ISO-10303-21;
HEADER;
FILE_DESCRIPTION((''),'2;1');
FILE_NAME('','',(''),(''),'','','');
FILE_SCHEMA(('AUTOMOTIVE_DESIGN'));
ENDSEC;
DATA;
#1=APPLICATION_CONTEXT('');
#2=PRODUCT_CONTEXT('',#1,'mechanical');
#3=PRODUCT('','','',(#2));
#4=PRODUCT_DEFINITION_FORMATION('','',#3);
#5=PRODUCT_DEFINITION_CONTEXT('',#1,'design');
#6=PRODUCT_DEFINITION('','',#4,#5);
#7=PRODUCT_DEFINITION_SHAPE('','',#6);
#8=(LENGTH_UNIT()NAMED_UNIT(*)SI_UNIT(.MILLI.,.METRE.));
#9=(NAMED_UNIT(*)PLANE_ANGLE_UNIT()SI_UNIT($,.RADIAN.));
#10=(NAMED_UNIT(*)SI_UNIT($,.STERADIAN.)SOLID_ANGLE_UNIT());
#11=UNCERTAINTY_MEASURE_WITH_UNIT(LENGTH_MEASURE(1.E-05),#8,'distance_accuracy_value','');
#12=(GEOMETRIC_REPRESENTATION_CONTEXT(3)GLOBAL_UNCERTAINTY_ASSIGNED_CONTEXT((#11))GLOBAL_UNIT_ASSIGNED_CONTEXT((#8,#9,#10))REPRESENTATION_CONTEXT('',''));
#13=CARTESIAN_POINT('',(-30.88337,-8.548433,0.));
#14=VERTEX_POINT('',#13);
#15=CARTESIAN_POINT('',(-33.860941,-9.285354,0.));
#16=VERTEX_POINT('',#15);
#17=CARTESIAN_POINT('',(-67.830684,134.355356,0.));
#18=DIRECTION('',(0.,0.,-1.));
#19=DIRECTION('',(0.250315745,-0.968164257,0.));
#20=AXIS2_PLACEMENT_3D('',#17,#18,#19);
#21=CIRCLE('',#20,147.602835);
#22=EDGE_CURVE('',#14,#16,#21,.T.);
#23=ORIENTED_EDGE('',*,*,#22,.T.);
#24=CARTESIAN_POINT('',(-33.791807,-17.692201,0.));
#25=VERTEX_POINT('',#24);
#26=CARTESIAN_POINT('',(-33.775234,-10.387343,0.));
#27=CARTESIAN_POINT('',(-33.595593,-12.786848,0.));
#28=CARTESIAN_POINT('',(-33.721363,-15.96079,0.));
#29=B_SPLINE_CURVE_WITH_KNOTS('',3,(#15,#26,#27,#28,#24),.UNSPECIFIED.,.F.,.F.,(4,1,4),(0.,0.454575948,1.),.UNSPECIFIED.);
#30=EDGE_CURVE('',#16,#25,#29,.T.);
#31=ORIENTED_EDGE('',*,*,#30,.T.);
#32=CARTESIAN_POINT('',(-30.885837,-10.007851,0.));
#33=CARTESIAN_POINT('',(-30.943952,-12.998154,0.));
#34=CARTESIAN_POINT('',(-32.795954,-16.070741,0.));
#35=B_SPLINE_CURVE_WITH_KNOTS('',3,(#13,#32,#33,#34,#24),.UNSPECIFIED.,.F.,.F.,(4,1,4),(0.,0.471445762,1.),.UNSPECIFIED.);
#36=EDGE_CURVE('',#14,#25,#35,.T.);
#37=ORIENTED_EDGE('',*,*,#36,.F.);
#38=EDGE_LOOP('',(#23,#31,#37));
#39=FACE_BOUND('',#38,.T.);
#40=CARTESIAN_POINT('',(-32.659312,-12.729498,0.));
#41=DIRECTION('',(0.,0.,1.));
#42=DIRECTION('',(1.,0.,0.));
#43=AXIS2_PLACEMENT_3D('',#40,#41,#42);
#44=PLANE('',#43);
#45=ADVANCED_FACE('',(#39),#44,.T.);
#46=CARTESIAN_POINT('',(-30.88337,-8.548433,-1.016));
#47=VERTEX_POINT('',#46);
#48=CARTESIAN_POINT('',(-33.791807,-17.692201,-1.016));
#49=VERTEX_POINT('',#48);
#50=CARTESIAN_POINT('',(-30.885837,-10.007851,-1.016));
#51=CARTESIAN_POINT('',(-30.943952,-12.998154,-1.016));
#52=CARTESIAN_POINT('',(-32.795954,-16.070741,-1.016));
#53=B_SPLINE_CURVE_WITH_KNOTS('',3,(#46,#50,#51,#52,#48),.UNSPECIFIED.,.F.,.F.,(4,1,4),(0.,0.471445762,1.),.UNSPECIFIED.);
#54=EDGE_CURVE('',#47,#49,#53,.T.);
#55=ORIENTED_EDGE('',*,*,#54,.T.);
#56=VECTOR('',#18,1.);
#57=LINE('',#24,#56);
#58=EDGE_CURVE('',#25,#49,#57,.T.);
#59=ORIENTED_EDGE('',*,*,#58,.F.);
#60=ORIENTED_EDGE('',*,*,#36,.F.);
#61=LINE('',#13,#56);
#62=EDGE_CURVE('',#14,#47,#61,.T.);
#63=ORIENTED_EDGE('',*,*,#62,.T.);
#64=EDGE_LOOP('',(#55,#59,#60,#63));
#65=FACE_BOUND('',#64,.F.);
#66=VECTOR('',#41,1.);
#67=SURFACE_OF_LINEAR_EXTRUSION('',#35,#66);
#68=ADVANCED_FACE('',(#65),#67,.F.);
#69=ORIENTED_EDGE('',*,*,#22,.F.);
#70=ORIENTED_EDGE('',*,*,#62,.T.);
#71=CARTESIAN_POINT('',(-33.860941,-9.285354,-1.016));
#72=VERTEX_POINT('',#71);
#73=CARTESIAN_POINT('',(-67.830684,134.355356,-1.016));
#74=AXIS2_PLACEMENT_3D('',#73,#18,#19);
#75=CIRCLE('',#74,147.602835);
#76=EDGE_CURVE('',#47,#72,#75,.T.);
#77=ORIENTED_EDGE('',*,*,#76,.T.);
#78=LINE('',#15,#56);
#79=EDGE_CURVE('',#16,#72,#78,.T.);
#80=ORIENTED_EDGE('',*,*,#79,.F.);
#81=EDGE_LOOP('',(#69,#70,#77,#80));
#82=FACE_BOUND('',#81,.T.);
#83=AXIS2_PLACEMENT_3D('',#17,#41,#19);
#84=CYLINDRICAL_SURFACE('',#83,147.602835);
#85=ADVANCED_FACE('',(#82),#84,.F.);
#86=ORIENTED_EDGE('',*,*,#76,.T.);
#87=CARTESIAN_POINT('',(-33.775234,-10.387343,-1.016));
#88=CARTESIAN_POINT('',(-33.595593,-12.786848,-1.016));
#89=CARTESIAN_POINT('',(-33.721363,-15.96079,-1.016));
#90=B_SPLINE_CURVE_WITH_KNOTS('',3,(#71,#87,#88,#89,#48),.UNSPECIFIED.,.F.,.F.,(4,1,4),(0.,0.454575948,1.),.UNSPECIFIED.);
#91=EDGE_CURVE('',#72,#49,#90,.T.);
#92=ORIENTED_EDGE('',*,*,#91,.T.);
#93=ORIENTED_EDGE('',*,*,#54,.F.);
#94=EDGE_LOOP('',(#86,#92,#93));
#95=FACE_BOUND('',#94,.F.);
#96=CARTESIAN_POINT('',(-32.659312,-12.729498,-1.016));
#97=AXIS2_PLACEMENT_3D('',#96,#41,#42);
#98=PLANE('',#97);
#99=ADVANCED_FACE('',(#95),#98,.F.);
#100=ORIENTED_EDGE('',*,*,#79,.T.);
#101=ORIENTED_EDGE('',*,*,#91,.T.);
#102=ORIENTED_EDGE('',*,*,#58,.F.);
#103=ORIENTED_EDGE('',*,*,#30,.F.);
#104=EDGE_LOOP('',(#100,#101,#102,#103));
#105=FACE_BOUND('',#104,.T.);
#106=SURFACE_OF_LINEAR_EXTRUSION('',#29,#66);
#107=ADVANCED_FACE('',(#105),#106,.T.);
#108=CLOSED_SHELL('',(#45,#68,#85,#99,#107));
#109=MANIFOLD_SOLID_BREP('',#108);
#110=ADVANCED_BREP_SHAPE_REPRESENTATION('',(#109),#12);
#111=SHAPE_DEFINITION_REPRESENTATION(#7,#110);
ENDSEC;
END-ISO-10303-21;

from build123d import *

# Parameters (mm, degrees)
F0_R     = 0.65
F3_DEPTH = 0.9398
F5_DEPTH = 1.016


# Not quite as in the source:
# - a fillet or chamfer that OpenCascade refuses, or shapes differently, is made with other operations: its cross-section is extruded or revolved along the edge and cut away or added
# - a feature names something its author has since deleted; it is built from what else it names


with BuildPart() as f3:
    # F0 (on Top) → F3 (new body)
    with BuildSketch(Plane.XY):
        with Locations((-65.8378056469, 32.2275372886)):
            Circle(F0_R)
    extrude(amount=F3_DEPTH)

    # F4: fillet of radius 0.6 on 1 edges, made by hand

    # F4_s1 → F4_t2 (revolve, cut)
    with BuildSketch(Plane.XZ.offset(-32.2275372886)):
        with BuildLine():
            add(Edge.make_bspline(
                [(-65.1878056469, 0.3398), (-65.1878056469, 0.9398), (-65.7878056469, 0.9398)],
                knots=[0, 0, 0, 1, 1, 1], degree=2, weights=[1, 0.4285714286, 1]))
            Line((-65.7878056469, 0.9398), (-65.1878056469, 0.9398))
            Line((-65.1878056469, 0.9398), (-65.1878056469, 0.3398))
        make_face()
    revolve(axis=Axis((-65.8378056469, 32.2275372886, 0.9398), (0, 0, 1)), mode=Mode.SUBTRACT)


with BuildPart() as f5:
    # F1 (on Top) → F5 (new body)
    with BuildSketch(Plane.XY):
        with BuildLine():
            ThreePointArc((-30.8833700819, -8.5484330949), (-32.3702413361, -8.924628467), (-33.8609412709, -9.285353832))
            add(Edge.make_bspline(
                [(-33.8609412709, -9.285353832), (-33.7752337579, -10.3873432275), (-33.5955934863, -12.7868478548), (-33.721363311, -15.9607901983), (-33.7918073162, -17.6922008293)],
                knots=[0, 0, 0, 0, 0.4545759476, 1, 1, 1, 1], degree=3))
            add(Edge.make_bspline(
                [(-30.8833700819, -8.5484330949), (-30.8858372606, -10.0078512456), (-30.9439518259, -12.998153667), (-32.7959538604, -16.0707410395), (-33.7918073162, -17.6922008293)],
                knots=[0, 0, 0, 0, 0.4714457615, 1, 1, 1, 1], degree=3))
        make_face()
    extrude(amount=-F5_DEPTH)


solid = f5.part
